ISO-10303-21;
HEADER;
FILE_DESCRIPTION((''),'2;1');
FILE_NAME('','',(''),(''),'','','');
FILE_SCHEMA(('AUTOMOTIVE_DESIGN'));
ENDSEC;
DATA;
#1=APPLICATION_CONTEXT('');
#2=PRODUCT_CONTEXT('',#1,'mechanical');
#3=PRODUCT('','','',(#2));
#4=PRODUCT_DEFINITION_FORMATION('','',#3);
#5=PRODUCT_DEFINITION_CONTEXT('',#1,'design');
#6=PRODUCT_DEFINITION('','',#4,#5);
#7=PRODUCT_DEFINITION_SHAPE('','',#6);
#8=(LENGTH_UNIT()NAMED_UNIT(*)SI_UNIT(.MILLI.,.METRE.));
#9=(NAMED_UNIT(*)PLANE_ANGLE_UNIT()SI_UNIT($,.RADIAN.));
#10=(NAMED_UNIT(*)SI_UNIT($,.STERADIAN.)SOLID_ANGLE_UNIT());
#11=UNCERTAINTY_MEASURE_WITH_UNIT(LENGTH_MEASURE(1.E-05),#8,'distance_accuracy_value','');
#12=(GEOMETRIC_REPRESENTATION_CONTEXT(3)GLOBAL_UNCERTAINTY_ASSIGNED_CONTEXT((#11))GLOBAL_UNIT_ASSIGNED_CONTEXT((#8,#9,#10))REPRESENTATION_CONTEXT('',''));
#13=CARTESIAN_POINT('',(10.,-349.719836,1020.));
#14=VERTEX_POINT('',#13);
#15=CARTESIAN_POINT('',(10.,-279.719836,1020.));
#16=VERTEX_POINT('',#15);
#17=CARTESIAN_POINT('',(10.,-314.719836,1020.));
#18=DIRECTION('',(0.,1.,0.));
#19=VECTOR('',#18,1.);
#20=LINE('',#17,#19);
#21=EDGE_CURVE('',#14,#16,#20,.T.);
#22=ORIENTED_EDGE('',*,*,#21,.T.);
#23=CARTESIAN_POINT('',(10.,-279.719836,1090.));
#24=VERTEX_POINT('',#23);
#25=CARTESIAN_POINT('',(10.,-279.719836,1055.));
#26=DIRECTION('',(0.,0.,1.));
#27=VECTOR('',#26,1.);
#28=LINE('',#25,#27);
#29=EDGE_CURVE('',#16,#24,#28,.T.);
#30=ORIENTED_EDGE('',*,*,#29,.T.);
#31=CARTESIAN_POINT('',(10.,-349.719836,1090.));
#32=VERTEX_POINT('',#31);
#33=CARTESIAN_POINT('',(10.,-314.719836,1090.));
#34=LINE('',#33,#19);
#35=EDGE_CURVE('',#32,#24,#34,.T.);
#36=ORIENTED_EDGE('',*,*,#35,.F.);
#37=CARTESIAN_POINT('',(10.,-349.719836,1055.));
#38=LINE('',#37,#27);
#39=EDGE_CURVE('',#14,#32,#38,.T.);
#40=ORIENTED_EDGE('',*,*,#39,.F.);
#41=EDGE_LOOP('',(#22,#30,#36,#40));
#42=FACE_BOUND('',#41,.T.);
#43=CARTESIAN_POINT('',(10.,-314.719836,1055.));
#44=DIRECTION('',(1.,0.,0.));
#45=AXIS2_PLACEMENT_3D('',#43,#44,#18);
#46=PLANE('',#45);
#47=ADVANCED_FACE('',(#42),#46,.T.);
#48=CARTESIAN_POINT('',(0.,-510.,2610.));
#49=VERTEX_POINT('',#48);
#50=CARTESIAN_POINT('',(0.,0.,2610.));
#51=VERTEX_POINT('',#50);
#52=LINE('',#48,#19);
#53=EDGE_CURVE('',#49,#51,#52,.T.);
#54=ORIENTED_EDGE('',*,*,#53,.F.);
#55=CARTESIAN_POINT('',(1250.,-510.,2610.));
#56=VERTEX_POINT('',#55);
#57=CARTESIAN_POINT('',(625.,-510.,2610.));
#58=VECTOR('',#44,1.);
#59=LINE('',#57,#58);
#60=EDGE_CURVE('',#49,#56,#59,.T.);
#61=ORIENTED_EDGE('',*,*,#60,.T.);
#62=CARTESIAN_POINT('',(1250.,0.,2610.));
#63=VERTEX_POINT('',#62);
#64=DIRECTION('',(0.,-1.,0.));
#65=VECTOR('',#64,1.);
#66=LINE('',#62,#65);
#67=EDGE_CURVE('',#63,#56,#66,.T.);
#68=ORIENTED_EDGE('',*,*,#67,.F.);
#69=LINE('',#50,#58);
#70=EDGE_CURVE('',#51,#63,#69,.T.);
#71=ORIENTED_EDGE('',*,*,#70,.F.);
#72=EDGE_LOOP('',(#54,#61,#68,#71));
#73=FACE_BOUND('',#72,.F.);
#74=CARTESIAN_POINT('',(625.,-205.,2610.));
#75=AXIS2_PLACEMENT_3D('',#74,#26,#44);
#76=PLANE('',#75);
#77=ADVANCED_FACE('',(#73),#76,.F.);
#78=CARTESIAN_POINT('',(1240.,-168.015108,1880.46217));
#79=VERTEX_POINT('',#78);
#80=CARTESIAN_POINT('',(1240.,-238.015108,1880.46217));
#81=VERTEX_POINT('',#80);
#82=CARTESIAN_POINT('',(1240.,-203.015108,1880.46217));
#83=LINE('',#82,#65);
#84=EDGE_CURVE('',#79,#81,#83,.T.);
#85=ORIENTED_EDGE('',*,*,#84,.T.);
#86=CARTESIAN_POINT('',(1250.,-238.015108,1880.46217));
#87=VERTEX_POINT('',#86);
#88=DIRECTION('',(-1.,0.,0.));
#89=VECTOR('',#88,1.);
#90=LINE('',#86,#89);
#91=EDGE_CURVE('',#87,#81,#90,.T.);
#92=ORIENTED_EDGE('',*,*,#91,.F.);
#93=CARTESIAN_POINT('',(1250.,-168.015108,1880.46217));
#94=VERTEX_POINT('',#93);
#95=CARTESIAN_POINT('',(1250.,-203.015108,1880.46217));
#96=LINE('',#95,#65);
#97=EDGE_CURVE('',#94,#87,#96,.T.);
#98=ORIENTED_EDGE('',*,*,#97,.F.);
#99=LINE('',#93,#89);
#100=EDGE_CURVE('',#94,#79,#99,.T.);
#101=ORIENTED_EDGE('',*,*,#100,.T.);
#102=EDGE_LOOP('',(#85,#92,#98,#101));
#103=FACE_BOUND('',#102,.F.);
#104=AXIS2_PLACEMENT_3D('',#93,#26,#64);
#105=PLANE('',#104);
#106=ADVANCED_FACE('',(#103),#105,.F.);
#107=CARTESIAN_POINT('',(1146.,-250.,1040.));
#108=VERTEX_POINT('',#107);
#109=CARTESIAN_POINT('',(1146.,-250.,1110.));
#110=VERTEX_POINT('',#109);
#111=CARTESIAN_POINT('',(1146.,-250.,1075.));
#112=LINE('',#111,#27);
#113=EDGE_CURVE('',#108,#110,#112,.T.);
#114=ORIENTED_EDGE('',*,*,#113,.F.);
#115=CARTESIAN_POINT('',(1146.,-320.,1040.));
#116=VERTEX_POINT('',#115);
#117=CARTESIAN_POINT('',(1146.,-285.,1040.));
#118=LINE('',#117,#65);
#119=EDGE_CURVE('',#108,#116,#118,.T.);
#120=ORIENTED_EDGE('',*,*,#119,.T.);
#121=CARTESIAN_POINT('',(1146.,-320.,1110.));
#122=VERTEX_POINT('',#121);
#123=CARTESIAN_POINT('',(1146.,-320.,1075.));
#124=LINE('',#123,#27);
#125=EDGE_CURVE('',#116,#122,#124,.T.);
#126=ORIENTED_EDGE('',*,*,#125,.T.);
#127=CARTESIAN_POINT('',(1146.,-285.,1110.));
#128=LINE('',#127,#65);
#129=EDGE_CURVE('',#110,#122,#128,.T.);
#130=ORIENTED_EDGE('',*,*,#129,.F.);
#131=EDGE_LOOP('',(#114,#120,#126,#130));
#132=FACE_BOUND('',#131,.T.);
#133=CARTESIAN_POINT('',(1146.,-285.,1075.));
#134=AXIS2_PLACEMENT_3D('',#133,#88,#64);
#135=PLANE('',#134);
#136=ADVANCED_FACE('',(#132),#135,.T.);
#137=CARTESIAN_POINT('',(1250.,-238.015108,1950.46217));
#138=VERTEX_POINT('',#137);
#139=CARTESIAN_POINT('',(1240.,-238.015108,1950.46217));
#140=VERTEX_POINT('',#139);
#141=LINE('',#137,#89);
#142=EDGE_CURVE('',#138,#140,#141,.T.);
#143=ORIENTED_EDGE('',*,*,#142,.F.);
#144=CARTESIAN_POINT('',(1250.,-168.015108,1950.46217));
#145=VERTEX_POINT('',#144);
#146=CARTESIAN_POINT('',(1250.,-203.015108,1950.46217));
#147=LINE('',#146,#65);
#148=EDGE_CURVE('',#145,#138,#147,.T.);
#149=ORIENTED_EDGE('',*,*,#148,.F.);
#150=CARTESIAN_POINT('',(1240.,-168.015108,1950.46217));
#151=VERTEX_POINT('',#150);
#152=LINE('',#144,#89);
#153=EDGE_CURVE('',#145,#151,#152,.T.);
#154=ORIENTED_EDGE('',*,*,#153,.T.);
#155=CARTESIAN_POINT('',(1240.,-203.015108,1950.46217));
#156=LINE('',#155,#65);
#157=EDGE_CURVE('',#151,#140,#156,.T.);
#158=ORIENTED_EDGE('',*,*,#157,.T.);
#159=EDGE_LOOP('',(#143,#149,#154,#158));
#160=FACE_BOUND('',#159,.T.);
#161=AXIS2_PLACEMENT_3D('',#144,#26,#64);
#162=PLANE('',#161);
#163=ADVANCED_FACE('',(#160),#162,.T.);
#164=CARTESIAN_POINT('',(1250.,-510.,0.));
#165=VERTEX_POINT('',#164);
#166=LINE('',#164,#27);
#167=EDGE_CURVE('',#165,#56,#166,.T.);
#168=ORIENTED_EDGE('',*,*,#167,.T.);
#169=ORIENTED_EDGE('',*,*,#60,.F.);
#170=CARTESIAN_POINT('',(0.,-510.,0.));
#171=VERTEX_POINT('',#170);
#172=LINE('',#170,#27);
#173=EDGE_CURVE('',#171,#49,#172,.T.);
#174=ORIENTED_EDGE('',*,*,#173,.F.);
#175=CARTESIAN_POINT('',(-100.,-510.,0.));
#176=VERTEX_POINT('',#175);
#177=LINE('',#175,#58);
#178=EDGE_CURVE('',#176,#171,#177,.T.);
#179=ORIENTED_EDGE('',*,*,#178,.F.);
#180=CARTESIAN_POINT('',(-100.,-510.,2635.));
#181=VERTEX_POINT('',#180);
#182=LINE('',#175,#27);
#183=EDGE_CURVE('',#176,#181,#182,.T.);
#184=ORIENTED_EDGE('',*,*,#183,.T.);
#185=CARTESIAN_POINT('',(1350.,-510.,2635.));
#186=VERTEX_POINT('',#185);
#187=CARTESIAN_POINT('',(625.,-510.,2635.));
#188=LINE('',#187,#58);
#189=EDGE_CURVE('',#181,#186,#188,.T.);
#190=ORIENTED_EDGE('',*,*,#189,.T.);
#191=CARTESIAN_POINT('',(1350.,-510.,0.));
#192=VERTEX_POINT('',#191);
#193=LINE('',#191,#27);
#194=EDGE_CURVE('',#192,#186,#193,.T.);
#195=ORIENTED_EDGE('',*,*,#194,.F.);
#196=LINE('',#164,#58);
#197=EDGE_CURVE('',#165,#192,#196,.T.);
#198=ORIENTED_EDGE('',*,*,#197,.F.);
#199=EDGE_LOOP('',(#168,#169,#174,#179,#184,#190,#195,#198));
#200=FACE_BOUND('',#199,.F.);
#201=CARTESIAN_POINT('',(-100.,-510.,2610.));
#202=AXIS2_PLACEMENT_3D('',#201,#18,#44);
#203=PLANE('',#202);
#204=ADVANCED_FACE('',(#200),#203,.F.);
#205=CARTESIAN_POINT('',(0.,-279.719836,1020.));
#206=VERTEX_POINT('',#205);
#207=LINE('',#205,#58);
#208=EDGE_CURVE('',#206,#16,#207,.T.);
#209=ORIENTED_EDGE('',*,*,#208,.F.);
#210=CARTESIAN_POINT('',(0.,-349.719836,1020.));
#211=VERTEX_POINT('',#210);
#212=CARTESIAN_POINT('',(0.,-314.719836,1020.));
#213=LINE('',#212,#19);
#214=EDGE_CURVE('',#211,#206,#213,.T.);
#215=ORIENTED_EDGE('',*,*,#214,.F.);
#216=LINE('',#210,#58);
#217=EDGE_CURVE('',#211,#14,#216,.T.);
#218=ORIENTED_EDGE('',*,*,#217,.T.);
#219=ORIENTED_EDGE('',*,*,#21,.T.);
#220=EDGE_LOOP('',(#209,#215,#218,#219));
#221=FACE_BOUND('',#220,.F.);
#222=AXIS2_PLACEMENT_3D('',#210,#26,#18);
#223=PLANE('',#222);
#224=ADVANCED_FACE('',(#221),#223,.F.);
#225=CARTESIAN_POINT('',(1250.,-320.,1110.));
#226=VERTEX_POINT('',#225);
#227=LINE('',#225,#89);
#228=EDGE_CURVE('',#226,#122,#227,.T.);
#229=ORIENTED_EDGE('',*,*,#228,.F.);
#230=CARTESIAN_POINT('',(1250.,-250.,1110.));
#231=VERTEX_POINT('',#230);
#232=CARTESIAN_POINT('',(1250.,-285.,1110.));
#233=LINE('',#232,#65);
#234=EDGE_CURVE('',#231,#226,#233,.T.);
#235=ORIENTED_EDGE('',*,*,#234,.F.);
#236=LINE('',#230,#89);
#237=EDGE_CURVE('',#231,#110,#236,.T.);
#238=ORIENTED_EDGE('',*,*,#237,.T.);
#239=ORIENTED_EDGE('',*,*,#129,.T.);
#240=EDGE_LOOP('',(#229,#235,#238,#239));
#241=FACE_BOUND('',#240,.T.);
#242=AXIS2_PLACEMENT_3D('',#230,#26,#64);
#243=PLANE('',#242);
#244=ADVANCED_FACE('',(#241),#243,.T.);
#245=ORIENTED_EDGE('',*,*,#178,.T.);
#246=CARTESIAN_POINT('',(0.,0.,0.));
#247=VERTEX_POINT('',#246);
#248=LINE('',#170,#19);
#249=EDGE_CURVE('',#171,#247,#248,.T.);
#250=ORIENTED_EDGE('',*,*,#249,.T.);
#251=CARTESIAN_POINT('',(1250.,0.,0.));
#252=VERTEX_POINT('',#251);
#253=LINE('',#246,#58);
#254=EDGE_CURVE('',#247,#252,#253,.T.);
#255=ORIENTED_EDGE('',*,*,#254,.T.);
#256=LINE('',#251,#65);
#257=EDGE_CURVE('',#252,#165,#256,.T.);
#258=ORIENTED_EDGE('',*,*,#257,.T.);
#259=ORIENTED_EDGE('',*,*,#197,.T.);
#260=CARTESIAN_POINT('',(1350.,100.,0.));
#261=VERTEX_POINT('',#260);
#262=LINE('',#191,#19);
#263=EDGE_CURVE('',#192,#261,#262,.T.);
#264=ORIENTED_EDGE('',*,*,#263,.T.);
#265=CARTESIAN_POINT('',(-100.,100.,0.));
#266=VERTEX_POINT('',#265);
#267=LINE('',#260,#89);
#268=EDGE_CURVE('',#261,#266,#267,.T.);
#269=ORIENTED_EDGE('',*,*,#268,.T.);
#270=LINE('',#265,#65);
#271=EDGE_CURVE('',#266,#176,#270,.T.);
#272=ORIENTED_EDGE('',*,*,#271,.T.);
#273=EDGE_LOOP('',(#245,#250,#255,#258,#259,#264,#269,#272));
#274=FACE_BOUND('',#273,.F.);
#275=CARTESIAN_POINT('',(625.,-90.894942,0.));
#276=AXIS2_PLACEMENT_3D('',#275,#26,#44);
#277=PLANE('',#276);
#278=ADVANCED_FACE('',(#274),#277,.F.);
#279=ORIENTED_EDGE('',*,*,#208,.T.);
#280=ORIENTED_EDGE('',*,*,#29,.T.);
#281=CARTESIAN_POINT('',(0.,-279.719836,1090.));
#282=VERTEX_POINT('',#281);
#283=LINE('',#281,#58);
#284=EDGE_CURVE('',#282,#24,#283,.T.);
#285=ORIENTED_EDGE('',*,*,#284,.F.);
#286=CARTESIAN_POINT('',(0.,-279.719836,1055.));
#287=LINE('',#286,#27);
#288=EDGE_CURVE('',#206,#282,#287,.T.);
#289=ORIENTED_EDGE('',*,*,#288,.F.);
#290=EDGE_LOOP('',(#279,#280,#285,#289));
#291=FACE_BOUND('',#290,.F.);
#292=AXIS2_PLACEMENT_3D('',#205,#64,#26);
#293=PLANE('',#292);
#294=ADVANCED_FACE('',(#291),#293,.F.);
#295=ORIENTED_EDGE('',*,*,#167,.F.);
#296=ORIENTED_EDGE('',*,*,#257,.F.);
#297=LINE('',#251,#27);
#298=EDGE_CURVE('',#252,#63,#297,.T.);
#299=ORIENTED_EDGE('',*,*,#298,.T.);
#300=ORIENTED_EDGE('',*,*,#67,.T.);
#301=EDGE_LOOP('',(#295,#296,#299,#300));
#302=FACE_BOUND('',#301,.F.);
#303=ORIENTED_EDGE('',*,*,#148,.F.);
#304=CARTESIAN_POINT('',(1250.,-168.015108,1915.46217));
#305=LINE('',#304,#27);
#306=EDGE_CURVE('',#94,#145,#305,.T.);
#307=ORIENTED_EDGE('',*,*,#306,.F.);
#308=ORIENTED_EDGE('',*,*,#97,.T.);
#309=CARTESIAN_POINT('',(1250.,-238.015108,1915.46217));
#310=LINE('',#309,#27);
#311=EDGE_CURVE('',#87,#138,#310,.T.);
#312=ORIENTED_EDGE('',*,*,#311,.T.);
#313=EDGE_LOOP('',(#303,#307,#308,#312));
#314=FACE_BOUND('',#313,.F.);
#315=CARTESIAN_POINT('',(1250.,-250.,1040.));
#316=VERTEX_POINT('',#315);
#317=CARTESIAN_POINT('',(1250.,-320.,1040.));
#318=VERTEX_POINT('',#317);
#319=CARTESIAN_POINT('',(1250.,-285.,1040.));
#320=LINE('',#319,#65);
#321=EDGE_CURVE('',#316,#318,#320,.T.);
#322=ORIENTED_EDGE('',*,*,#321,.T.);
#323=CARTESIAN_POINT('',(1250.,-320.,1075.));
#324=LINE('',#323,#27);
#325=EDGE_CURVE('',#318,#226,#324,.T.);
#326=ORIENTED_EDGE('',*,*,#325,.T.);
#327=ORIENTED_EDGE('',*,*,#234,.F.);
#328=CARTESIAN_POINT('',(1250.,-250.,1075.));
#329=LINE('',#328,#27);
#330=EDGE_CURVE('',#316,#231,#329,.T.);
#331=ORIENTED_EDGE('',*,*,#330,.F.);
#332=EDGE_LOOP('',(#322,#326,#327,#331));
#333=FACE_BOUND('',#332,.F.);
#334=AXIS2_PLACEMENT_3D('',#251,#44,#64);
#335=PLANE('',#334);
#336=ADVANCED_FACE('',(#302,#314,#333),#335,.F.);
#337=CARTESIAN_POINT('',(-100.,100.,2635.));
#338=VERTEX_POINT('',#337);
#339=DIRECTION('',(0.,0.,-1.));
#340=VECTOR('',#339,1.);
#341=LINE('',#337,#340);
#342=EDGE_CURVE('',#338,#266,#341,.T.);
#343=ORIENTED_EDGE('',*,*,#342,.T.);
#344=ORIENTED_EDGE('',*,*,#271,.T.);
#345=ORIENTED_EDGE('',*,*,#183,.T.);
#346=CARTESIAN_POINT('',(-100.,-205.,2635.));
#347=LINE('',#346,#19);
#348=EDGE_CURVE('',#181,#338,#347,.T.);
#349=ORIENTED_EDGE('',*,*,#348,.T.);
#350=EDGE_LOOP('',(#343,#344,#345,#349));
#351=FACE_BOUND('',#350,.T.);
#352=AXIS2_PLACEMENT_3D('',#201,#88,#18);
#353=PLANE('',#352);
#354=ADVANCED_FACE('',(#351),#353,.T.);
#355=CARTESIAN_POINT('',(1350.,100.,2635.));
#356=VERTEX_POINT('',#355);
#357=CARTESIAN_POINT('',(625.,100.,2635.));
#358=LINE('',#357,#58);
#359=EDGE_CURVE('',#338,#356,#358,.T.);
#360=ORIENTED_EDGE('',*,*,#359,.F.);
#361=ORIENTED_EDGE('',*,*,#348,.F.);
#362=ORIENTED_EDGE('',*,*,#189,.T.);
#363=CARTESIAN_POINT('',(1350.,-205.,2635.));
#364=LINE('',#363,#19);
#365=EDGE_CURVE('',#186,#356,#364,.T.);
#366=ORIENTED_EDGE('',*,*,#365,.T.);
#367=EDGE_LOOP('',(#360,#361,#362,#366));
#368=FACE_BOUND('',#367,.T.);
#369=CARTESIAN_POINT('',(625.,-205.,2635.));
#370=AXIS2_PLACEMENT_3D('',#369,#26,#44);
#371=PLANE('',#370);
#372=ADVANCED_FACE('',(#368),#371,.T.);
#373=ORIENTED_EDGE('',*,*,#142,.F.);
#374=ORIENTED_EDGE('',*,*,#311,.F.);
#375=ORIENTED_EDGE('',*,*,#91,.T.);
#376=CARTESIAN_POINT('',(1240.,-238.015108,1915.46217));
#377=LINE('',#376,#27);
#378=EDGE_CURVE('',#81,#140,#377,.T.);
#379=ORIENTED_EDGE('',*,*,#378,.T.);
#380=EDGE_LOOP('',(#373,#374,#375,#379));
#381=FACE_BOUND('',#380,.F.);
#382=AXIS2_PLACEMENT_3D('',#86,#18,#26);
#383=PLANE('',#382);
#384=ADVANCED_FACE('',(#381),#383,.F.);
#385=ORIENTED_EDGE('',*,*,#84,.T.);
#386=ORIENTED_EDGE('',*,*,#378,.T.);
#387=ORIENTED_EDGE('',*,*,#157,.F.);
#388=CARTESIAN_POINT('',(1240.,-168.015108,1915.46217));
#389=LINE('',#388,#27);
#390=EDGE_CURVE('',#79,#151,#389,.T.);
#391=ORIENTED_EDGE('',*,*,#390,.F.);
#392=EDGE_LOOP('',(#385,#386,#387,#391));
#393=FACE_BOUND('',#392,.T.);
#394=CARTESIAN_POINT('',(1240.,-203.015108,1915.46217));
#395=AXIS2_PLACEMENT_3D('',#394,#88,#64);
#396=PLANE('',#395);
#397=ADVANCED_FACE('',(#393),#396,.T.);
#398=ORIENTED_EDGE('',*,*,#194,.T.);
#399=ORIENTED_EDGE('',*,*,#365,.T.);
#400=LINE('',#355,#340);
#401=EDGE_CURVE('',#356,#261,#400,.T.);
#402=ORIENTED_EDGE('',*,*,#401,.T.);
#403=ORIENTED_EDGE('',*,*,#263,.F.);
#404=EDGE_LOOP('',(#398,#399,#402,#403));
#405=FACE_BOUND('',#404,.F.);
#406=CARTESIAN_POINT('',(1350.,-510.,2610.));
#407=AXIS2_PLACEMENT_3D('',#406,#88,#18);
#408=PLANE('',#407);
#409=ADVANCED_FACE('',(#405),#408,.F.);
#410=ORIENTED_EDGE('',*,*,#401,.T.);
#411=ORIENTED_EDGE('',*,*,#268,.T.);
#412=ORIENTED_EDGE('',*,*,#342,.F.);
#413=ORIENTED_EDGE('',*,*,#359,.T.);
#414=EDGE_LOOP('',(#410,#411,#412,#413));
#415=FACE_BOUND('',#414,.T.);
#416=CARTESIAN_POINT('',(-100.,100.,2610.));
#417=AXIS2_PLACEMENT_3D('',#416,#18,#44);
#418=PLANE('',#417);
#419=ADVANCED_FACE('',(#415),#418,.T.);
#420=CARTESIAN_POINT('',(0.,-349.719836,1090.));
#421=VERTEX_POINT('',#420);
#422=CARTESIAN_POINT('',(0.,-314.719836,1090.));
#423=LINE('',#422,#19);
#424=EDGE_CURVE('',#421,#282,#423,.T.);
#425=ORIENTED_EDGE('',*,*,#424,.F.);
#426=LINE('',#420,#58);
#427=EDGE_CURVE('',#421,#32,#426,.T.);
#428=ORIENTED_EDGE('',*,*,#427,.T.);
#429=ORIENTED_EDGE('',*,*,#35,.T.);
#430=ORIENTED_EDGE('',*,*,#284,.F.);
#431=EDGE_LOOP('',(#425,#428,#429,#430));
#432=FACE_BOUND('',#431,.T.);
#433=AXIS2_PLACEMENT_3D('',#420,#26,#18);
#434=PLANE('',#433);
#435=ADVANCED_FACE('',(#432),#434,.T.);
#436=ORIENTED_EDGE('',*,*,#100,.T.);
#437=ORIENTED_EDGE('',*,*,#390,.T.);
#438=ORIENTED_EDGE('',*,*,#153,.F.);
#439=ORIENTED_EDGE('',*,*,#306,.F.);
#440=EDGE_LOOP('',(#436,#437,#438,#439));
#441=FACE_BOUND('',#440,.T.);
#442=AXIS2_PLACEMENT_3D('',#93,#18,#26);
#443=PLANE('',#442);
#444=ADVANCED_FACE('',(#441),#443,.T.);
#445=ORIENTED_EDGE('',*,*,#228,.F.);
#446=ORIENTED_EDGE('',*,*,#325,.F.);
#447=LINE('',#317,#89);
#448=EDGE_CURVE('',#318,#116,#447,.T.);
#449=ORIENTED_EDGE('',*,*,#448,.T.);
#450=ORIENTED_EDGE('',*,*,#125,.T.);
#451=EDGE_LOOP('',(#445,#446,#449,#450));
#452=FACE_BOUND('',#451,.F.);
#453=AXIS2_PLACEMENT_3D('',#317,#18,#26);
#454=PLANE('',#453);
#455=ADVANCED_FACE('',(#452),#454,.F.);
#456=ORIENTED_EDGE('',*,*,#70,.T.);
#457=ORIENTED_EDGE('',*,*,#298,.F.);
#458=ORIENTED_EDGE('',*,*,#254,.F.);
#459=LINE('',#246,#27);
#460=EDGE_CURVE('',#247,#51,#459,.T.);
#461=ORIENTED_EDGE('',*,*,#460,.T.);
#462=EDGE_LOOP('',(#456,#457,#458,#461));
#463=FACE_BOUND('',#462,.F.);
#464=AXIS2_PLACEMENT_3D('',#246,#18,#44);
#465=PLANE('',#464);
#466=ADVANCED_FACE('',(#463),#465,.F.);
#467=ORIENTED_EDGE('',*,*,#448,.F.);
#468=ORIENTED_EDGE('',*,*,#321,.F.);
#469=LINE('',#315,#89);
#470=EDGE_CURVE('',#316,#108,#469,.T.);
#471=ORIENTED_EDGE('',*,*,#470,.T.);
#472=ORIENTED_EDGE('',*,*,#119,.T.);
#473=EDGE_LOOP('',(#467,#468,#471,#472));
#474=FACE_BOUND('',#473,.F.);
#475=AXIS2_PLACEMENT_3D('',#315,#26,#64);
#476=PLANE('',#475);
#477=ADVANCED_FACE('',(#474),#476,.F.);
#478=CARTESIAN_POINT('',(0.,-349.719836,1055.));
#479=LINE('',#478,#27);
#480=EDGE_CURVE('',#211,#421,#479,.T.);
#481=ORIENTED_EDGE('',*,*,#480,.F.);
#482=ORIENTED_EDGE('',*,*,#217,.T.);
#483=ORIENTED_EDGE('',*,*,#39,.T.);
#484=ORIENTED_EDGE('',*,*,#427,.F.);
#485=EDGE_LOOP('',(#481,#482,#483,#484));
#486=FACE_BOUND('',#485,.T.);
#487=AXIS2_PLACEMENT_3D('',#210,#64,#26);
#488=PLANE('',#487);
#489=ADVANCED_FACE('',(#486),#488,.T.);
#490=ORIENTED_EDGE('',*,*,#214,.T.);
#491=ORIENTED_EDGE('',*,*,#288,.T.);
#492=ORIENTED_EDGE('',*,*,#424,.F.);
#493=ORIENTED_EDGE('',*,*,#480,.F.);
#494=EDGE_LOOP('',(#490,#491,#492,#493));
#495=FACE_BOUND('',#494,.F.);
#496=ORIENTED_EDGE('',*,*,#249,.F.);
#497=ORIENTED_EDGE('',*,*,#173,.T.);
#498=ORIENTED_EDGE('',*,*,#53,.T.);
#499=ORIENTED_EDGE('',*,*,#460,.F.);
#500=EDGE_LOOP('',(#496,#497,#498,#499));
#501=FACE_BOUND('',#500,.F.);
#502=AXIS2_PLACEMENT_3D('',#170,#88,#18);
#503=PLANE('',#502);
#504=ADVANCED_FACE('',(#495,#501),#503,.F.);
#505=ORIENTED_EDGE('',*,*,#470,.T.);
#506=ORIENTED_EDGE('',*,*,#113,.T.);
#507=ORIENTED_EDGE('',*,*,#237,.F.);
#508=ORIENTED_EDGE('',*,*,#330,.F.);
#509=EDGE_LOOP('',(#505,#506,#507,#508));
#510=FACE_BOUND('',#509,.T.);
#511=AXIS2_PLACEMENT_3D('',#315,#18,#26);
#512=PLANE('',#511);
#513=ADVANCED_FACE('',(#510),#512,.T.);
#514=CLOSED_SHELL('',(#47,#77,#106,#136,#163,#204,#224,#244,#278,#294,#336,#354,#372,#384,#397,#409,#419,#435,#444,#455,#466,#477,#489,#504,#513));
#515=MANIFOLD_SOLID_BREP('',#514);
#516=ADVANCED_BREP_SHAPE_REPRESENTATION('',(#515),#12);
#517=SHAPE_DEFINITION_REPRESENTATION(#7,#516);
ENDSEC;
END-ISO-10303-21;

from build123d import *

# Parameters (mm, degrees)
F1_DEPTH = 2610
F2_W     = 1450
F2_H     = 610
F3_DEPTH = 25
F5_W     = 70
F5_H     = 70
F6_DEPTH = 104
F7_DEPTH = 10
F8_W     = 70
F8_H     = 70
F9_DEPTH = 10


# Not quite as in the source:
# - the program builds the solid bodies; features that only make, move or delete a surface that nothing else refers to are left out


with BuildPart() as f1:
    # F0 (on Top) → F1 (new body)
    with BuildSketch(Plane.XY):
        Polygon((-100, -510), (0, -510), (0, 0), (1250, 0), (1250, -510), (1350, -510), (1350, 100), (-100, 100), align=None)
    extrude(amount=F1_DEPTH)

    # F2 (on face) → F3 (join)
    with BuildSketch(Plane.XY.offset(2610)):
        with Locations((625, -205)):
            Rectangle(F2_W, F2_H)
    extrude(amount=F3_DEPTH)

    # F5 (on face) → F6 (join)
    with BuildSketch(Plane(origin=(1250, 0, 0), x_dir=(0, -1, 0), z_dir=(-1, 0, 0))):
        with Locations((285, 1075)):
            Rectangle(F5_W, F5_H)
    extrude(amount=F6_DEPTH)

    # F5 (on face) → F7 (join)
    with BuildSketch(Plane(origin=(1250, 0, 0), x_dir=(0, -1, 0), z_dir=(-1, 0, 0))):
        with Locations((203.0151075125, 1915.4621696472)):
            Rectangle(F5_W, F5_H)
    extrude(amount=F7_DEPTH)

    # F8 (on face) → F9 (join)
    with BuildSketch(Plane.YZ):
        with Locations((-314.7198361158, 1055)):
            Rectangle(F8_W, F8_H)
    extrude(amount=F9_DEPTH)


solid = f1.part
